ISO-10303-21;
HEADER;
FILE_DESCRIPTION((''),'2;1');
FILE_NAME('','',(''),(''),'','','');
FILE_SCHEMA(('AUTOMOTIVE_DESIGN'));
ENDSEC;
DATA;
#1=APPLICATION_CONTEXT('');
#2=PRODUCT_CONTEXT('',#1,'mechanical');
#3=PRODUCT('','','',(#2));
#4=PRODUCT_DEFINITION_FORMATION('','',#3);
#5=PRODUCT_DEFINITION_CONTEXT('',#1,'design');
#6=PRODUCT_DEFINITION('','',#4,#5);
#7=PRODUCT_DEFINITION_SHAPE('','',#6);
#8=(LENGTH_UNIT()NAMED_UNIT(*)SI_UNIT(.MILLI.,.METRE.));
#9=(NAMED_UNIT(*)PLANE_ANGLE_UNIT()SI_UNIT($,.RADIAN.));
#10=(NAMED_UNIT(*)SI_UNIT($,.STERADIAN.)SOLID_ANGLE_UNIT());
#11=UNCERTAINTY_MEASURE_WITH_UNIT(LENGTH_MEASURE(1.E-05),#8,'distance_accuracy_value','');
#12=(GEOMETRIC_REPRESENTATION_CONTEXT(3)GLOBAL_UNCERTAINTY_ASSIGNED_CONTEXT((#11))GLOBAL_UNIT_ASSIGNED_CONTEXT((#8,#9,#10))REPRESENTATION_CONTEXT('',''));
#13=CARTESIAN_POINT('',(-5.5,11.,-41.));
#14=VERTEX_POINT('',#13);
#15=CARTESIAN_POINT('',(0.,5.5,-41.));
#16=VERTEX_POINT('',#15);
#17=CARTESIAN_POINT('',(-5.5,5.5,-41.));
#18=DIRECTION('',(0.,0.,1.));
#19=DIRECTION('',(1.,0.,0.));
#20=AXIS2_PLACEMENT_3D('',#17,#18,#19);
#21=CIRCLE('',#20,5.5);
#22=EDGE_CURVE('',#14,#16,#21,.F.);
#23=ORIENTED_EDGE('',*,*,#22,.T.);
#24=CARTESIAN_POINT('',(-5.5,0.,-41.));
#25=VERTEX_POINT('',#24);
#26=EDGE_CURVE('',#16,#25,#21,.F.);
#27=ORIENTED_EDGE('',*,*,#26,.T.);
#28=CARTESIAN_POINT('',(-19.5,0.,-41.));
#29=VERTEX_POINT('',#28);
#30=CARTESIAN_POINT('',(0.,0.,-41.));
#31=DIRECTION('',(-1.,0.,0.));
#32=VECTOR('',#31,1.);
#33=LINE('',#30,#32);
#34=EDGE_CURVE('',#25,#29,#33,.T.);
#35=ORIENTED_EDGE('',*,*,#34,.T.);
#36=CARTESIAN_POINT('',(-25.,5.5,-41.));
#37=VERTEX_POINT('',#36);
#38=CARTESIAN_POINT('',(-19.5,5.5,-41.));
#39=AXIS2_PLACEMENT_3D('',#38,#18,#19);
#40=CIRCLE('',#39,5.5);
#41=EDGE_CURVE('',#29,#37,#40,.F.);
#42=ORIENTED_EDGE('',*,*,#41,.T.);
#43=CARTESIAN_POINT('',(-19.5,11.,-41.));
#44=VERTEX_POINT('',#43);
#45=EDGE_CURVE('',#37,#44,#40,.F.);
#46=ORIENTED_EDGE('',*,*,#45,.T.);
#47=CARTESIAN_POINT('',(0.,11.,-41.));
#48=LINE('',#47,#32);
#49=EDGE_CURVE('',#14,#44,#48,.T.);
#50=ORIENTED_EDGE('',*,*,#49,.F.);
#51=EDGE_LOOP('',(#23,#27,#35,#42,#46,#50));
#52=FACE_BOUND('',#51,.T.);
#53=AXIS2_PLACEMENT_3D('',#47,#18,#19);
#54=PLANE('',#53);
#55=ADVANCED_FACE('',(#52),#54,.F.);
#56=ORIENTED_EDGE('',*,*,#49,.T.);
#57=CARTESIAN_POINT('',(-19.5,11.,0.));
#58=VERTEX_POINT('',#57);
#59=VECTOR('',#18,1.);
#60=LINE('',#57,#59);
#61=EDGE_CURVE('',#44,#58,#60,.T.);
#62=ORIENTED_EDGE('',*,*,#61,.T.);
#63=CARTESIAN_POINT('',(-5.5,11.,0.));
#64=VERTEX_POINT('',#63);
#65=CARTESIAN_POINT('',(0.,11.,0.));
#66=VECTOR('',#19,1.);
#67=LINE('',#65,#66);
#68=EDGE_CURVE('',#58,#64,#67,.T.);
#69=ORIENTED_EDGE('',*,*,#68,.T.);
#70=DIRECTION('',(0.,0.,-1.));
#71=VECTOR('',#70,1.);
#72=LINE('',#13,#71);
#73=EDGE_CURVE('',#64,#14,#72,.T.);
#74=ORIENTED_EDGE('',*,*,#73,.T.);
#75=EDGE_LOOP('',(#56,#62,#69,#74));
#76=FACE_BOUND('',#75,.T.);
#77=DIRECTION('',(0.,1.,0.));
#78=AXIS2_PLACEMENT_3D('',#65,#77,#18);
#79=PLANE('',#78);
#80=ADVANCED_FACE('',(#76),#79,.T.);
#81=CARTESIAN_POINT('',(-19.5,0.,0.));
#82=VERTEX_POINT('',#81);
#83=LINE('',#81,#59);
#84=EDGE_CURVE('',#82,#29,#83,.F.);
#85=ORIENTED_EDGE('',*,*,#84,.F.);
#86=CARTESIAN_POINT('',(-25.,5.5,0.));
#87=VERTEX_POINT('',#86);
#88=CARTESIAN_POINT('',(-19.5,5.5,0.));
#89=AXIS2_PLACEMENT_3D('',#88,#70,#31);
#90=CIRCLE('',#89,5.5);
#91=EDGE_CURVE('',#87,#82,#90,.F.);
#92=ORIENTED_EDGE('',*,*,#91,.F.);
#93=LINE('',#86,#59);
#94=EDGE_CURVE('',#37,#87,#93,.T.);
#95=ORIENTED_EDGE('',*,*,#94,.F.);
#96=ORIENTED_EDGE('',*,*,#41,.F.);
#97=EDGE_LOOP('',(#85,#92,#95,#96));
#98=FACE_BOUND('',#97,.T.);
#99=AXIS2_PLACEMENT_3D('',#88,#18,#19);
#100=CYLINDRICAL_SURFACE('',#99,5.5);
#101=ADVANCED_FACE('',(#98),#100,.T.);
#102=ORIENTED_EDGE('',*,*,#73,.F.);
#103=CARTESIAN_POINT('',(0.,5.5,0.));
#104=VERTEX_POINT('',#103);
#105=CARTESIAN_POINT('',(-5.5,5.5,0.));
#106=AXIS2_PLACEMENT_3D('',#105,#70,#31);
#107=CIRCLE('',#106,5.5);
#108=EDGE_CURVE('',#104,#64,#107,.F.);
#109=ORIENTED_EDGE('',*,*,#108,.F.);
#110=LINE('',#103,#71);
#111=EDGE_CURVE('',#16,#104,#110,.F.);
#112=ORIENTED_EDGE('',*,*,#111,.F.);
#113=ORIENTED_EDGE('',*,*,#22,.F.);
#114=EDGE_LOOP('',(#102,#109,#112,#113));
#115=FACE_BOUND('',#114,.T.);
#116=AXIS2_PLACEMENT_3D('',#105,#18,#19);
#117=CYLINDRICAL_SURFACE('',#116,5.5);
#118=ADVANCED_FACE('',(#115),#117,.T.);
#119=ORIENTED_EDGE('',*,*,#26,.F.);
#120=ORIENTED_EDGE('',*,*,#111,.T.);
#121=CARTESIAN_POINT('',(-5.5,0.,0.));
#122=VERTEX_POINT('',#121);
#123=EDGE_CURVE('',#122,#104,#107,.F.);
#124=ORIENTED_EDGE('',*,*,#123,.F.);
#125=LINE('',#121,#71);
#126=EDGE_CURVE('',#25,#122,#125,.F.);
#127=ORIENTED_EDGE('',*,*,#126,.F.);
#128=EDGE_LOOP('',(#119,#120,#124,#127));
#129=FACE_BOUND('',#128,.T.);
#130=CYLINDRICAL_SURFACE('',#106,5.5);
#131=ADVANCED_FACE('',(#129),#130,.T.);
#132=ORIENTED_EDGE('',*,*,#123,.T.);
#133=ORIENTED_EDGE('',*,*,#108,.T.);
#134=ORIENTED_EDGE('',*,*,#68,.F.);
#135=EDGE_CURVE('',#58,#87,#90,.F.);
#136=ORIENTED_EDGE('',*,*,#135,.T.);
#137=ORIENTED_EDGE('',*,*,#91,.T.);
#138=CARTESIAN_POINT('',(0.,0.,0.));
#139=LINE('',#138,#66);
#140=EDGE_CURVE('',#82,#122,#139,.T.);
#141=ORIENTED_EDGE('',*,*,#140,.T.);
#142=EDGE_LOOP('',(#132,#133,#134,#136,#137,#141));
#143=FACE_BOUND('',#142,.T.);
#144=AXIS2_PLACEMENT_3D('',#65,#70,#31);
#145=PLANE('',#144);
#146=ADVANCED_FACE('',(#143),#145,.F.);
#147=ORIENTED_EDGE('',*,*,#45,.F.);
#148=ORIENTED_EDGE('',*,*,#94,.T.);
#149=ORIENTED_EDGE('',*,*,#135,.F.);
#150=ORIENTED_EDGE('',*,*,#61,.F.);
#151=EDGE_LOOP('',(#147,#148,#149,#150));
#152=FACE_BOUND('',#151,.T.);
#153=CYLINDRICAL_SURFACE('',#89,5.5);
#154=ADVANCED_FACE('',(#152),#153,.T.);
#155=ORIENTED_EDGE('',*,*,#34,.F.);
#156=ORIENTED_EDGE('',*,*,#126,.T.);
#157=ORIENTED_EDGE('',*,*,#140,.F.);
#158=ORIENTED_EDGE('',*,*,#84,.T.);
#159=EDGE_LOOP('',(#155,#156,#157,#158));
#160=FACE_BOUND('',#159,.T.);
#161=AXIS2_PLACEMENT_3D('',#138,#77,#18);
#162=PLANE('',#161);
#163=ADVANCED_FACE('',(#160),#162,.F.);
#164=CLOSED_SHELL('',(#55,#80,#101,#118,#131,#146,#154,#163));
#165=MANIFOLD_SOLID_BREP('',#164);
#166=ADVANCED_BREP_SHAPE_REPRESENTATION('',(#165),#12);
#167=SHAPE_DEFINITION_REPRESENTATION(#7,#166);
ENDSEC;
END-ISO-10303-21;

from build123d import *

# Parameters (mm, degrees)
SCHIZZO1_W                   = 25
SCHIZZO1_H                   = 41
ESTRUSIONE_ESTRUSIONE1_DEPTH = 11
RACCORDO1_R                  = 5.5


with BuildPart() as part:
    # Schizzo1 → Estrusione-Estrusione1 (new body)
    with BuildSketch(Plane(origin=(0, 0, 0), x_dir=(1, 0, 0), z_dir=(0, 1, 0))):
        with Locations((-12.5, 20.5)):
            Rectangle(SCHIZZO1_W, SCHIZZO1_H)
    extrude(amount=ESTRUSIONE_ESTRUSIONE1_DEPTH)

    # Raccordo1
    raccordo1_edges = [part.edges().sort_by_distance(p)[0] for p in [
        (-25, 11, -20.5),
        (-25, 0, -20.5),
        (0, 0, -20.5),
        (0, 11, -20.5),
    ]]
    fillet(raccordo1_edges, radius=RACCORDO1_R - 0.0001)  # a hair under: the kernel refuses the full size


solid = part.part
